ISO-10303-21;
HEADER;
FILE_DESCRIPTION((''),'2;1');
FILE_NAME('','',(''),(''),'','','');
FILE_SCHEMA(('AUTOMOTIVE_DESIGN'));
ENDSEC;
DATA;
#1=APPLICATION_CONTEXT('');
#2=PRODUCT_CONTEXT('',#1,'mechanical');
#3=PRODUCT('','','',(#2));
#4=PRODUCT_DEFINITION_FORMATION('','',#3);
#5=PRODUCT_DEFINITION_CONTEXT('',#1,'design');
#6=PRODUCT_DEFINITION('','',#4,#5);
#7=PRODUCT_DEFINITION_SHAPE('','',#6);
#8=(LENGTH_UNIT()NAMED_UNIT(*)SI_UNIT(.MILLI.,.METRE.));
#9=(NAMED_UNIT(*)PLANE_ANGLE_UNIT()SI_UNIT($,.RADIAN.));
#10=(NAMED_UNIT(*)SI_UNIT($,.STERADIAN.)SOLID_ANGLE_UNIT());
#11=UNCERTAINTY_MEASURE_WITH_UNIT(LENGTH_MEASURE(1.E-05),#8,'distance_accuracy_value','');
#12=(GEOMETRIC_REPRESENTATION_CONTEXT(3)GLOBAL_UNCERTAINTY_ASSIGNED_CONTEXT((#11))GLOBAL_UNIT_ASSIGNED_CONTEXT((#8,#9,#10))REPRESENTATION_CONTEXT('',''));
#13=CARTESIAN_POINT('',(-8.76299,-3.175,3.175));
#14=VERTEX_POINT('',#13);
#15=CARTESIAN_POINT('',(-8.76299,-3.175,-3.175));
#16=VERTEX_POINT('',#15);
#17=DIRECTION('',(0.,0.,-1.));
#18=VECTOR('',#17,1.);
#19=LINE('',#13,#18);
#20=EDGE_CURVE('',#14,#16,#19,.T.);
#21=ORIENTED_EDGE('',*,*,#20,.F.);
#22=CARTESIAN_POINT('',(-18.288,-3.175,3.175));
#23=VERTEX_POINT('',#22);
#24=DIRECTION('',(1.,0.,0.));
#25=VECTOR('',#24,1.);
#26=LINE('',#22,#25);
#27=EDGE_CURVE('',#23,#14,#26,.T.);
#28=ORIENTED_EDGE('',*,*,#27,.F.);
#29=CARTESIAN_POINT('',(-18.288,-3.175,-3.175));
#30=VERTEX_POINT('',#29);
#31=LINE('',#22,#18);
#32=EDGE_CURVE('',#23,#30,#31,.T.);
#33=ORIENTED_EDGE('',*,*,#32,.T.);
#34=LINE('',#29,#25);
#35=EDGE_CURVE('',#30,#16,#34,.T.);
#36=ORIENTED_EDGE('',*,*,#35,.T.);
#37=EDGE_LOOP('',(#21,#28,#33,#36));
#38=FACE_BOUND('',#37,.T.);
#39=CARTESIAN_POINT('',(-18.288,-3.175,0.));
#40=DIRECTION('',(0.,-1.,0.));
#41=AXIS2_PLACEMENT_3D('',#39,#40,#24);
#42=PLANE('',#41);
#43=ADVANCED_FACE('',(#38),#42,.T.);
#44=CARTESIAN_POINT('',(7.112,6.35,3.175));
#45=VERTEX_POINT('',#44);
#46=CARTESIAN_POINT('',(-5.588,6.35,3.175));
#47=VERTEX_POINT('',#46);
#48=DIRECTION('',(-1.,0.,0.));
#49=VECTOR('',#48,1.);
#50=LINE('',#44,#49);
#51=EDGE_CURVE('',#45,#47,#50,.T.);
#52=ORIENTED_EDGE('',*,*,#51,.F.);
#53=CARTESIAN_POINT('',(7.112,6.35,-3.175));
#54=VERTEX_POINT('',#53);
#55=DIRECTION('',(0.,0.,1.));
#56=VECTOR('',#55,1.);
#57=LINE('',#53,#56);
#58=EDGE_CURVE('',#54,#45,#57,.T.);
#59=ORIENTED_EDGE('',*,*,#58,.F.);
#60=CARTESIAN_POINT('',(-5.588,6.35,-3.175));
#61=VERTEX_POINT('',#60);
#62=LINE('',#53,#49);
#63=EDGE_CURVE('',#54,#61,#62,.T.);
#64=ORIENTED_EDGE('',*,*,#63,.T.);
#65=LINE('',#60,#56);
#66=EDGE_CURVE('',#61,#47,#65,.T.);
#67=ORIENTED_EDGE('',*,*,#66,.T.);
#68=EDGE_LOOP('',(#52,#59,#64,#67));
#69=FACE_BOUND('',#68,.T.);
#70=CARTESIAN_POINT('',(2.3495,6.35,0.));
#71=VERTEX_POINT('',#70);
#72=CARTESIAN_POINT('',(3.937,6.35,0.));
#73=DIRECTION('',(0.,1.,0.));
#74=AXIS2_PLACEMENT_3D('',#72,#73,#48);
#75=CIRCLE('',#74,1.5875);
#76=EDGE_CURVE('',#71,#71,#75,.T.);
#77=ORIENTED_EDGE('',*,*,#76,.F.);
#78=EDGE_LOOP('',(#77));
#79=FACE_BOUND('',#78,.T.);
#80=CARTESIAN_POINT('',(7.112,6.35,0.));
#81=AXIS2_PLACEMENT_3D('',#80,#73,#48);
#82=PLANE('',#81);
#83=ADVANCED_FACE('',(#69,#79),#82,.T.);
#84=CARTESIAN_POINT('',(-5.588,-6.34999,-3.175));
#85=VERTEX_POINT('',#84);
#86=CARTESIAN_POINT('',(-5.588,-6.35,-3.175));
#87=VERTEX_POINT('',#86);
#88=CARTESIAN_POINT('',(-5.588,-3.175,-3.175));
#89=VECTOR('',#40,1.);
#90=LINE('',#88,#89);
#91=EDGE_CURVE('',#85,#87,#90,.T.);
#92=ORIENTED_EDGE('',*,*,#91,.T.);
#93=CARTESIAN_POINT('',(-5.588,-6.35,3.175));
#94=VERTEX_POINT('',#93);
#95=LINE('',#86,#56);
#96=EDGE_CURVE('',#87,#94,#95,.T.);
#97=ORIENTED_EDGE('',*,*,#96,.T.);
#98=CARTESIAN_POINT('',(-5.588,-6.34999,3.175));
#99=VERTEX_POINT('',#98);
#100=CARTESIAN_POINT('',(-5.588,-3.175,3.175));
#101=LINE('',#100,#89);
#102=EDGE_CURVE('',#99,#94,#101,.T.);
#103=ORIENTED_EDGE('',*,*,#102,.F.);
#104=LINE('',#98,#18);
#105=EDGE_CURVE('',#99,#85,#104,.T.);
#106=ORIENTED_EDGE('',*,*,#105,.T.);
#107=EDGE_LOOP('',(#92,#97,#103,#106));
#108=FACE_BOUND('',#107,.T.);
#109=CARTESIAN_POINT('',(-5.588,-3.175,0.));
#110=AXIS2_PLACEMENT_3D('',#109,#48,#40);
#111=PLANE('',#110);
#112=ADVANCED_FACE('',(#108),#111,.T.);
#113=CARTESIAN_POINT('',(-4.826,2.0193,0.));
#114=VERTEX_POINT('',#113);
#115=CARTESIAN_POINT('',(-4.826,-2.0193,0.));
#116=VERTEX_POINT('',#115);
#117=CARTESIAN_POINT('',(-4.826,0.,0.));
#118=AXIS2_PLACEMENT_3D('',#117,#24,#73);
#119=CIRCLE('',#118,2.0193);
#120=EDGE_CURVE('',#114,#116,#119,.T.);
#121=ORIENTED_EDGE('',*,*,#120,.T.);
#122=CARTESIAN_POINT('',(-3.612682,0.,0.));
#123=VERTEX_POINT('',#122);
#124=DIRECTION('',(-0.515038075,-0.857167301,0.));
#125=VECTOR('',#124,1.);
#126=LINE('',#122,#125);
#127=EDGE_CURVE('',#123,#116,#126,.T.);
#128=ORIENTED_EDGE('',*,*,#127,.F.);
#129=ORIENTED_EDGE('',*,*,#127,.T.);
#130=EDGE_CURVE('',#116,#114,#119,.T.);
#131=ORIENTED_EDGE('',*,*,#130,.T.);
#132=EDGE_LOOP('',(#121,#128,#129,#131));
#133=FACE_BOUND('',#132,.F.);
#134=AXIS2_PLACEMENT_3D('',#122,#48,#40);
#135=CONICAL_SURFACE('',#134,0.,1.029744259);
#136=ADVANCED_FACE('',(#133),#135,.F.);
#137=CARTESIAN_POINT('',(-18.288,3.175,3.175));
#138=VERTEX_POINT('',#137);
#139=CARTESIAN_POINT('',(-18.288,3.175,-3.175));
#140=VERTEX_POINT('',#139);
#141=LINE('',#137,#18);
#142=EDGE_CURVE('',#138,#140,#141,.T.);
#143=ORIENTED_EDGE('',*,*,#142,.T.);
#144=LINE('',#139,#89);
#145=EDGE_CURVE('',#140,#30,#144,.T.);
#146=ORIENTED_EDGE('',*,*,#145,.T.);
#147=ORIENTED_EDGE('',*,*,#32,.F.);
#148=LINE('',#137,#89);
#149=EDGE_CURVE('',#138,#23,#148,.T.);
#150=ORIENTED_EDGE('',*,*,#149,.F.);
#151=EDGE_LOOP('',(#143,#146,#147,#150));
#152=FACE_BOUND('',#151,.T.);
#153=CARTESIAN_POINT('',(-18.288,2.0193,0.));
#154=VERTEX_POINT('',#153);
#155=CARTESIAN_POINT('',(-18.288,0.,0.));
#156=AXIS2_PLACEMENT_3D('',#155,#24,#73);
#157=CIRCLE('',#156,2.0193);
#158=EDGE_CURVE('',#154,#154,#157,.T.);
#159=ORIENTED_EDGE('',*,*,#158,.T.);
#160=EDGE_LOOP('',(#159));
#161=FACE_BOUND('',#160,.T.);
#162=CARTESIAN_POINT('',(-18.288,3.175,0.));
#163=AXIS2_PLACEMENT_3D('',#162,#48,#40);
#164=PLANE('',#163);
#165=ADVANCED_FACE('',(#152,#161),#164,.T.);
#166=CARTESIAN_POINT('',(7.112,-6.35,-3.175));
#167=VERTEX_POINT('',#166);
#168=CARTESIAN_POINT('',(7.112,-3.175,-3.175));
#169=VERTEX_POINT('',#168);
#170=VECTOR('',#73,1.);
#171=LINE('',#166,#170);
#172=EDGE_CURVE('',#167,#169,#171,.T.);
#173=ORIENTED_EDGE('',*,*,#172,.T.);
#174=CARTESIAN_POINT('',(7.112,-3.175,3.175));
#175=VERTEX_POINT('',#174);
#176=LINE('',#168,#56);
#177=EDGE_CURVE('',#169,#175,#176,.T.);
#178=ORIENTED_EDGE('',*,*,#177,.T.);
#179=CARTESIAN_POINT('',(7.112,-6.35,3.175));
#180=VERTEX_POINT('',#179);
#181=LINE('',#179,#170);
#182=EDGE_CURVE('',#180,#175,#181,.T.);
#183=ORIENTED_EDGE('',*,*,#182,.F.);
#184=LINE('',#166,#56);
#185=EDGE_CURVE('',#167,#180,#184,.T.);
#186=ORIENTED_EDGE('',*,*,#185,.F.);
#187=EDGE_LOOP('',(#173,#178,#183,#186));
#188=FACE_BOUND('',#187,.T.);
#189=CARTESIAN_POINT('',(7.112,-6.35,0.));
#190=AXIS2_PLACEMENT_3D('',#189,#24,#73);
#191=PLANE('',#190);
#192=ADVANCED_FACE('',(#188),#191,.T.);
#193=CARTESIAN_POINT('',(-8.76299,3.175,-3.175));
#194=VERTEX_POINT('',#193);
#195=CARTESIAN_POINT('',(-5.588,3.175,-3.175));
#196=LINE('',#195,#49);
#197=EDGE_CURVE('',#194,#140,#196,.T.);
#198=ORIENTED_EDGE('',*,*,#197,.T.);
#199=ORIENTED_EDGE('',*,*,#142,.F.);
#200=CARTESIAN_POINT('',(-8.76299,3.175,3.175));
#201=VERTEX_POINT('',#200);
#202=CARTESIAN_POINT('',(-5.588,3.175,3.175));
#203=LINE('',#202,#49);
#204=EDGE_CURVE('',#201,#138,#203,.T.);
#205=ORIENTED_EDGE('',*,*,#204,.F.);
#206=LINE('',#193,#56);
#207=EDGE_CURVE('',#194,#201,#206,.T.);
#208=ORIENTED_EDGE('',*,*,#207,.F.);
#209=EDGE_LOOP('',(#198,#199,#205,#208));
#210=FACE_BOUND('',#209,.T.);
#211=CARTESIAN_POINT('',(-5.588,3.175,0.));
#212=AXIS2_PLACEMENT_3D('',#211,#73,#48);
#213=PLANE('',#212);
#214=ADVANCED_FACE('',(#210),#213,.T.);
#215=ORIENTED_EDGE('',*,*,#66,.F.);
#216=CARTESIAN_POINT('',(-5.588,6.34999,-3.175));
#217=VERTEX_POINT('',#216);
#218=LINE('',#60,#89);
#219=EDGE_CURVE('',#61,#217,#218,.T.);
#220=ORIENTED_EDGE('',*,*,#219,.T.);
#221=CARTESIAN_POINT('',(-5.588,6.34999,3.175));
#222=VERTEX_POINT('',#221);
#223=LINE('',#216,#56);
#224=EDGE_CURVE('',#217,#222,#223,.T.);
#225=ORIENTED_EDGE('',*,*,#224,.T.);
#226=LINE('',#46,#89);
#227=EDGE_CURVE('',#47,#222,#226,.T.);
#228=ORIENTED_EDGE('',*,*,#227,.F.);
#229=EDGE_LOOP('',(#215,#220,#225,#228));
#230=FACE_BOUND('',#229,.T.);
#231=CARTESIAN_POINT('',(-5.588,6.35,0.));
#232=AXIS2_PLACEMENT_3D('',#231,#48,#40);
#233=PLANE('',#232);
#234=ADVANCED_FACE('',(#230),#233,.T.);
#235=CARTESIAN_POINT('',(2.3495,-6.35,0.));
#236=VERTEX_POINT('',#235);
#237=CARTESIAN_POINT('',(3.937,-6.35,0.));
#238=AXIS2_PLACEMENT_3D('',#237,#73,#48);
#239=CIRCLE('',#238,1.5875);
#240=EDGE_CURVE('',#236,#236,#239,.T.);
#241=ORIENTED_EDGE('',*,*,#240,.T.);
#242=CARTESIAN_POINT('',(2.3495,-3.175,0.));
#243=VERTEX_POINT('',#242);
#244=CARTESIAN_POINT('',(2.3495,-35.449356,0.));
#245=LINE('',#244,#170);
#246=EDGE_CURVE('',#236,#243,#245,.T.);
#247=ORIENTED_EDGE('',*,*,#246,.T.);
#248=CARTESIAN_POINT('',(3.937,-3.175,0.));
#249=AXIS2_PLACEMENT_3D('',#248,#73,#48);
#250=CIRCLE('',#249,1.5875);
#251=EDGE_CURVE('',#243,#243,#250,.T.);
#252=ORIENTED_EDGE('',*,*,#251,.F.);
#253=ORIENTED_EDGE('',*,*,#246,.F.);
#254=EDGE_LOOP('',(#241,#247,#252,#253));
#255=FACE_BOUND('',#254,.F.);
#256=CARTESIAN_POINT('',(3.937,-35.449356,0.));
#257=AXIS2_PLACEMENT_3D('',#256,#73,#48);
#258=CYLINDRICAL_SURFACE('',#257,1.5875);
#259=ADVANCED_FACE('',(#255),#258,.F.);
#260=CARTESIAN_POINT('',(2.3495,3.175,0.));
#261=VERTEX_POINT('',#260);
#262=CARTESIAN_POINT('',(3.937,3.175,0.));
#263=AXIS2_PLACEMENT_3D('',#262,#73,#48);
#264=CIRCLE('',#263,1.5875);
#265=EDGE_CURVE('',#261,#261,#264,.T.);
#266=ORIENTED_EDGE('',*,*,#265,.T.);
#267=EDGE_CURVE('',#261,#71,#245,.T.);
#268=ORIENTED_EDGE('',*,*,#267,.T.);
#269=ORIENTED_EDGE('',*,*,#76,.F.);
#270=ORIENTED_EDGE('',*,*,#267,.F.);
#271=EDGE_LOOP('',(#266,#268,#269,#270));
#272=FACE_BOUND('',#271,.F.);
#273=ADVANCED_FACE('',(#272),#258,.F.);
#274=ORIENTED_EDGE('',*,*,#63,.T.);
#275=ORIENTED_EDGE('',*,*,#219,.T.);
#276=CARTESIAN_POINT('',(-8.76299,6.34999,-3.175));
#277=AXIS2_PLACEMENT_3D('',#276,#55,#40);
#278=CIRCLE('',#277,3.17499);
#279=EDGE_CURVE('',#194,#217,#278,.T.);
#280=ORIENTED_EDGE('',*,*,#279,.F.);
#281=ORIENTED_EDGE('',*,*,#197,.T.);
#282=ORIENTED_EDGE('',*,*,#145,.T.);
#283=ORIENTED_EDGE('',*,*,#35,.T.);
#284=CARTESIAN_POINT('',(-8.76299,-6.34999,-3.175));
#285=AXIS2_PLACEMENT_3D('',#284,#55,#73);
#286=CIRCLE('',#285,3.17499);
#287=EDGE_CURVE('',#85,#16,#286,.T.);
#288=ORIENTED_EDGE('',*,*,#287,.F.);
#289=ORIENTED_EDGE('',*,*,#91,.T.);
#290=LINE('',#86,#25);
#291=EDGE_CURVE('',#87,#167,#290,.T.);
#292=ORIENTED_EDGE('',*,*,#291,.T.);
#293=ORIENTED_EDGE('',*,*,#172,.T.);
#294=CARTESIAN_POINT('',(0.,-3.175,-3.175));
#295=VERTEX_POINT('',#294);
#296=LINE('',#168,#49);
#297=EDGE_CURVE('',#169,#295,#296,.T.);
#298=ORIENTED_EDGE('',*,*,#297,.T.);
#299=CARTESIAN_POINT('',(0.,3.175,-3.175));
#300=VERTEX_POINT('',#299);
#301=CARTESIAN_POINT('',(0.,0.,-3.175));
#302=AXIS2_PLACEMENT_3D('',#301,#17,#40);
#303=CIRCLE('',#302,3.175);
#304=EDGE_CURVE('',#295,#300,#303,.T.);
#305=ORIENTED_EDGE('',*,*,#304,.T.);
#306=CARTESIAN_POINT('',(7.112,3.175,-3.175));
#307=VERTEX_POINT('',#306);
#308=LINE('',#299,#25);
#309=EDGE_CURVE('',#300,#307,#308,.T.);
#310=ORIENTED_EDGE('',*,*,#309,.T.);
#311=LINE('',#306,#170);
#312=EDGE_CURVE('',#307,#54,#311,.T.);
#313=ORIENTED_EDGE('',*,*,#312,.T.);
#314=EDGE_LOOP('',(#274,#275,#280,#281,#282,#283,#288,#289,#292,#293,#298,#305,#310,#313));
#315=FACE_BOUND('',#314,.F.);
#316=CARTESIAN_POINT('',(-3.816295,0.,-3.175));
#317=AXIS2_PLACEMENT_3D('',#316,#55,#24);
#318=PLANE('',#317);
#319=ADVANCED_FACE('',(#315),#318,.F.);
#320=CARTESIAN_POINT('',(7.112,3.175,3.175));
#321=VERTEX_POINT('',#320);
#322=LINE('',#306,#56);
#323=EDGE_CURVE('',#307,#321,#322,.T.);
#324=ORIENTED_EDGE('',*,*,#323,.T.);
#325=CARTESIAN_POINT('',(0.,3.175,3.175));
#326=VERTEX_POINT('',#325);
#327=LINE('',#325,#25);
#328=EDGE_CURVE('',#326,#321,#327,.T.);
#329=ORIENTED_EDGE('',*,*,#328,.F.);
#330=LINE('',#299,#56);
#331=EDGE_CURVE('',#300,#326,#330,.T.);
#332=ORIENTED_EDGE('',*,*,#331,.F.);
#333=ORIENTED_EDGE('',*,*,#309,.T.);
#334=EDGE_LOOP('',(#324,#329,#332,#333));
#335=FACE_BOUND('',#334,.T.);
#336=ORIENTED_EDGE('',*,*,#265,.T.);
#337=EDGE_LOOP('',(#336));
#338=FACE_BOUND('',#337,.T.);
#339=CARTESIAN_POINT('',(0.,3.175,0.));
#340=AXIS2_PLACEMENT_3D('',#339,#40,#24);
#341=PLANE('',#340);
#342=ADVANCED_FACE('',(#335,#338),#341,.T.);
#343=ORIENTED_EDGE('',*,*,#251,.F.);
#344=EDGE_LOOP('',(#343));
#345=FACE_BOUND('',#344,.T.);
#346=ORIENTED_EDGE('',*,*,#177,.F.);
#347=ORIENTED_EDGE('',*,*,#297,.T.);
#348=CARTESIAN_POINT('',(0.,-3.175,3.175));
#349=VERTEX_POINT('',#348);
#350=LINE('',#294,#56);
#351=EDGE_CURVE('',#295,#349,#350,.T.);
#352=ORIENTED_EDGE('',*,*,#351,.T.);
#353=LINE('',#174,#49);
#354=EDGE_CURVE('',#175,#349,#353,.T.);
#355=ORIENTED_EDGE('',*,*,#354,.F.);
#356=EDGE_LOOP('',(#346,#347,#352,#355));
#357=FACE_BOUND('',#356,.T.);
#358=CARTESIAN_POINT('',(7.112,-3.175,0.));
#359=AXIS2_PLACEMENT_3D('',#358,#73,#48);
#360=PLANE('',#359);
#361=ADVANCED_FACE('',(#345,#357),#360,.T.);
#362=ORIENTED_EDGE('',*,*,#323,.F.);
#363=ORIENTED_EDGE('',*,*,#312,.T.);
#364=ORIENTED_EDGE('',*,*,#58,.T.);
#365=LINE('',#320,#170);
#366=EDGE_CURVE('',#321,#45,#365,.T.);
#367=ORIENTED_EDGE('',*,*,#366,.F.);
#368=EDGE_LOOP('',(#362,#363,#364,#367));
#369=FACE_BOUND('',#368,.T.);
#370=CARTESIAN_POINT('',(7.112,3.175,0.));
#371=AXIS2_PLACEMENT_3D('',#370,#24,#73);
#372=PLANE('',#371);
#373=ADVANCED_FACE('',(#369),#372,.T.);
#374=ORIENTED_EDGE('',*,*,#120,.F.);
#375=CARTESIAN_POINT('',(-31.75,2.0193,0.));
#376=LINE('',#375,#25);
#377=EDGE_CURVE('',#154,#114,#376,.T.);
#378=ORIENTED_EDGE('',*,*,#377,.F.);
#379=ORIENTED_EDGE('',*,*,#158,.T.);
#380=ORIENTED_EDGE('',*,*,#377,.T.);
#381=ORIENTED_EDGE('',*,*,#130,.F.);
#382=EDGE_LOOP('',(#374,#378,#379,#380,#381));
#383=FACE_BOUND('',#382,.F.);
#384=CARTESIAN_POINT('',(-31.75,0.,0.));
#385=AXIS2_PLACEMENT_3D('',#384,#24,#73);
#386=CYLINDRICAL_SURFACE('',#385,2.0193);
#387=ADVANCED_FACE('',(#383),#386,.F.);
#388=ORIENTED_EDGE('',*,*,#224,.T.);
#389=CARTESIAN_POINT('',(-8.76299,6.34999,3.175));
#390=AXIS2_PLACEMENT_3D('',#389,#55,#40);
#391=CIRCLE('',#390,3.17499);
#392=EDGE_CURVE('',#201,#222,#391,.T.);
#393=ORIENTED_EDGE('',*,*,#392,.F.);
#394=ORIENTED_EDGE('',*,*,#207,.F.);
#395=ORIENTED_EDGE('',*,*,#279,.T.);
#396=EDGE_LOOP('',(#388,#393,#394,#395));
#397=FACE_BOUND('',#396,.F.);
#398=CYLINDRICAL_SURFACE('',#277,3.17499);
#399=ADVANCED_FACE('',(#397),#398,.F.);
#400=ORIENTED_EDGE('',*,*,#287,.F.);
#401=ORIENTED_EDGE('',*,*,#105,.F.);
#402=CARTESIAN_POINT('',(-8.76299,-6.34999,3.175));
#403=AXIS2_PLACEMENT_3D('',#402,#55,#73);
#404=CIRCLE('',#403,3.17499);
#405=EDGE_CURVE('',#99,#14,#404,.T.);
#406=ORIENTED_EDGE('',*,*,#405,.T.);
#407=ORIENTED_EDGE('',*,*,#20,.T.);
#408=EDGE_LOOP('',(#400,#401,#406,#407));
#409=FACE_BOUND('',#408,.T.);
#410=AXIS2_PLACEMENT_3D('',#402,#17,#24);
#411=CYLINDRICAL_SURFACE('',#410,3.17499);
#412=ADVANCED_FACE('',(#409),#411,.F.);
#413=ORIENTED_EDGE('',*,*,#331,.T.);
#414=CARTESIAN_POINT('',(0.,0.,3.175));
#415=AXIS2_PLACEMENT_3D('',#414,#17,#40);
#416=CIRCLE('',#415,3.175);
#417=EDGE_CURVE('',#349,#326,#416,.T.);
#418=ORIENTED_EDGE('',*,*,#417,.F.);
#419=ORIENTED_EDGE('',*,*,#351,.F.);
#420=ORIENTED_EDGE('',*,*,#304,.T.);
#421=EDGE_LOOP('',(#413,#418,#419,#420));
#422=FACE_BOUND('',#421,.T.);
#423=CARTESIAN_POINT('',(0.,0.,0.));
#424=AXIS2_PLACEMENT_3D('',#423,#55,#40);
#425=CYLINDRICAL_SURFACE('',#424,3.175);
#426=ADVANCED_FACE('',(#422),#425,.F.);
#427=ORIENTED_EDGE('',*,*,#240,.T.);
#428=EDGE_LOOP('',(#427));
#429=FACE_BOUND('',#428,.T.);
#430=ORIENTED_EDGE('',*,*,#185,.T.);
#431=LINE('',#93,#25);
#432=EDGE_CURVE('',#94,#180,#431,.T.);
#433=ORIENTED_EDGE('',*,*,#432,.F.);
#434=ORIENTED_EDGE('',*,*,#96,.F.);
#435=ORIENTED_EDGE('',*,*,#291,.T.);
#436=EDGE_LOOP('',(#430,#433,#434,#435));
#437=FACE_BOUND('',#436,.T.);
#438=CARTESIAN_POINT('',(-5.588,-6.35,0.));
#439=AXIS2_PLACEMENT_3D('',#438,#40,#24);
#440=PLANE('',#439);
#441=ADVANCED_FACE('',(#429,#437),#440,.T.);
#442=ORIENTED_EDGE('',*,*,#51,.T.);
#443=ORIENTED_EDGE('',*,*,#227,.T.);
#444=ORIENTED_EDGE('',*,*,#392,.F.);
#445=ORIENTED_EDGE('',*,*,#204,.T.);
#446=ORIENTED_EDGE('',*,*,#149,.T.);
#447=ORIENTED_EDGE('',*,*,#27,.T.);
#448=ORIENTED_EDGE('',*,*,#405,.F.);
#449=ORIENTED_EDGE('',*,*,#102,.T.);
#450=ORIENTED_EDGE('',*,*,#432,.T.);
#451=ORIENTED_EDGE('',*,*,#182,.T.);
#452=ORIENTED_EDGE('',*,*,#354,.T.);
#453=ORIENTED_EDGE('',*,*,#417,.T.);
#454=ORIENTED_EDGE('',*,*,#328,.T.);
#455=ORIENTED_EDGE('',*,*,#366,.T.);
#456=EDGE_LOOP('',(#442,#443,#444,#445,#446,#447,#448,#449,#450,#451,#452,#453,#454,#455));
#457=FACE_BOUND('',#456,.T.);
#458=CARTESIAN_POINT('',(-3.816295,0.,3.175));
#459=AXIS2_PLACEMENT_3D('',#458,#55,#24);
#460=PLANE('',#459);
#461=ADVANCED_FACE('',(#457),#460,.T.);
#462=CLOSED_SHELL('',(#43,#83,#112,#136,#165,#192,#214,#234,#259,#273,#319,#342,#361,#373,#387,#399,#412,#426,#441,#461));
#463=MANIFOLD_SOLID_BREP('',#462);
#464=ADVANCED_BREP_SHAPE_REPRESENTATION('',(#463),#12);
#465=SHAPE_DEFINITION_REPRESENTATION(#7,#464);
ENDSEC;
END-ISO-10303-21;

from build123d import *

# Parameters (mm, degrees)
F1_DEPTH = 3.175
F2_R     = 3.17499
F4_D     = 3.175
F6_D     = 4.0386
F6_DEPTH = 13.462
F6_TIP   = 1.213317848


# Not quite as in the source:
# - a fillet or chamfer is up to 0.001 mm smaller than in the source, because OpenCascade refuses the exact size


with BuildPart() as f1:
    # F0 (on Top) → F1 (new body, symmetric)
    with BuildSketch(Plane.XY):
        with BuildLine():
            Line((-5.588, -3.175), (-5.588, -6.35))
            Line((-5.588, -6.35), (7.112, -6.35))
            Line((7.112, -6.35), (7.112, -3.175))
            Line((7.112, -3.175), (0, -3.175))
            ThreePointArc((0, -3.175), (-3.175, 0), (0, 3.175))
            Line((0, 3.175), (7.112, 3.175))
            Line((7.112, 3.175), (7.112, 6.35))
            Line((7.112, 6.35), (-5.588, 6.35))
            Line((-5.588, 6.35), (-5.588, 3.175))
            Line((-5.588, 3.175), (-18.288, 3.175))
            Line((-18.288, 3.175), (-18.288, -3.175))
            Line((-18.288, -3.175), (-5.588, -3.175))
        make_face()
    extrude(amount=F1_DEPTH, both=True)

    # F2 (radius 3.175 in the source; OpenCascade refuses exactly that, so slightly less here)
    f2_edges = [f1.edges().sort_by_distance(p)[0] for p in [
        (-5.588, -3.175, 0),
        (-5.588, 3.175, 0),
    ]]
    fillet(f2_edges, radius=F2_R)

    # F4 (through all)
    with Locations(Plane.XZ.offset(6.35)):
        with Locations((3.937, 0)):
            Hole(F4_D / 2)

    # F6
    with Locations(Plane(origin=(-18.288, 0, 0), x_dir=(0, -1, 0), z_dir=(-1, 0, 0))):
        with Locations((0, 0)):
            Hole(F6_D / 2, depth=F6_DEPTH)
            with Locations((0, 0, -(F6_DEPTH + F6_TIP / 2))):  # 118° drill point
                Cone(0, F6_D / 2, F6_TIP, mode=Mode.SUBTRACT)


solid = f1.part
